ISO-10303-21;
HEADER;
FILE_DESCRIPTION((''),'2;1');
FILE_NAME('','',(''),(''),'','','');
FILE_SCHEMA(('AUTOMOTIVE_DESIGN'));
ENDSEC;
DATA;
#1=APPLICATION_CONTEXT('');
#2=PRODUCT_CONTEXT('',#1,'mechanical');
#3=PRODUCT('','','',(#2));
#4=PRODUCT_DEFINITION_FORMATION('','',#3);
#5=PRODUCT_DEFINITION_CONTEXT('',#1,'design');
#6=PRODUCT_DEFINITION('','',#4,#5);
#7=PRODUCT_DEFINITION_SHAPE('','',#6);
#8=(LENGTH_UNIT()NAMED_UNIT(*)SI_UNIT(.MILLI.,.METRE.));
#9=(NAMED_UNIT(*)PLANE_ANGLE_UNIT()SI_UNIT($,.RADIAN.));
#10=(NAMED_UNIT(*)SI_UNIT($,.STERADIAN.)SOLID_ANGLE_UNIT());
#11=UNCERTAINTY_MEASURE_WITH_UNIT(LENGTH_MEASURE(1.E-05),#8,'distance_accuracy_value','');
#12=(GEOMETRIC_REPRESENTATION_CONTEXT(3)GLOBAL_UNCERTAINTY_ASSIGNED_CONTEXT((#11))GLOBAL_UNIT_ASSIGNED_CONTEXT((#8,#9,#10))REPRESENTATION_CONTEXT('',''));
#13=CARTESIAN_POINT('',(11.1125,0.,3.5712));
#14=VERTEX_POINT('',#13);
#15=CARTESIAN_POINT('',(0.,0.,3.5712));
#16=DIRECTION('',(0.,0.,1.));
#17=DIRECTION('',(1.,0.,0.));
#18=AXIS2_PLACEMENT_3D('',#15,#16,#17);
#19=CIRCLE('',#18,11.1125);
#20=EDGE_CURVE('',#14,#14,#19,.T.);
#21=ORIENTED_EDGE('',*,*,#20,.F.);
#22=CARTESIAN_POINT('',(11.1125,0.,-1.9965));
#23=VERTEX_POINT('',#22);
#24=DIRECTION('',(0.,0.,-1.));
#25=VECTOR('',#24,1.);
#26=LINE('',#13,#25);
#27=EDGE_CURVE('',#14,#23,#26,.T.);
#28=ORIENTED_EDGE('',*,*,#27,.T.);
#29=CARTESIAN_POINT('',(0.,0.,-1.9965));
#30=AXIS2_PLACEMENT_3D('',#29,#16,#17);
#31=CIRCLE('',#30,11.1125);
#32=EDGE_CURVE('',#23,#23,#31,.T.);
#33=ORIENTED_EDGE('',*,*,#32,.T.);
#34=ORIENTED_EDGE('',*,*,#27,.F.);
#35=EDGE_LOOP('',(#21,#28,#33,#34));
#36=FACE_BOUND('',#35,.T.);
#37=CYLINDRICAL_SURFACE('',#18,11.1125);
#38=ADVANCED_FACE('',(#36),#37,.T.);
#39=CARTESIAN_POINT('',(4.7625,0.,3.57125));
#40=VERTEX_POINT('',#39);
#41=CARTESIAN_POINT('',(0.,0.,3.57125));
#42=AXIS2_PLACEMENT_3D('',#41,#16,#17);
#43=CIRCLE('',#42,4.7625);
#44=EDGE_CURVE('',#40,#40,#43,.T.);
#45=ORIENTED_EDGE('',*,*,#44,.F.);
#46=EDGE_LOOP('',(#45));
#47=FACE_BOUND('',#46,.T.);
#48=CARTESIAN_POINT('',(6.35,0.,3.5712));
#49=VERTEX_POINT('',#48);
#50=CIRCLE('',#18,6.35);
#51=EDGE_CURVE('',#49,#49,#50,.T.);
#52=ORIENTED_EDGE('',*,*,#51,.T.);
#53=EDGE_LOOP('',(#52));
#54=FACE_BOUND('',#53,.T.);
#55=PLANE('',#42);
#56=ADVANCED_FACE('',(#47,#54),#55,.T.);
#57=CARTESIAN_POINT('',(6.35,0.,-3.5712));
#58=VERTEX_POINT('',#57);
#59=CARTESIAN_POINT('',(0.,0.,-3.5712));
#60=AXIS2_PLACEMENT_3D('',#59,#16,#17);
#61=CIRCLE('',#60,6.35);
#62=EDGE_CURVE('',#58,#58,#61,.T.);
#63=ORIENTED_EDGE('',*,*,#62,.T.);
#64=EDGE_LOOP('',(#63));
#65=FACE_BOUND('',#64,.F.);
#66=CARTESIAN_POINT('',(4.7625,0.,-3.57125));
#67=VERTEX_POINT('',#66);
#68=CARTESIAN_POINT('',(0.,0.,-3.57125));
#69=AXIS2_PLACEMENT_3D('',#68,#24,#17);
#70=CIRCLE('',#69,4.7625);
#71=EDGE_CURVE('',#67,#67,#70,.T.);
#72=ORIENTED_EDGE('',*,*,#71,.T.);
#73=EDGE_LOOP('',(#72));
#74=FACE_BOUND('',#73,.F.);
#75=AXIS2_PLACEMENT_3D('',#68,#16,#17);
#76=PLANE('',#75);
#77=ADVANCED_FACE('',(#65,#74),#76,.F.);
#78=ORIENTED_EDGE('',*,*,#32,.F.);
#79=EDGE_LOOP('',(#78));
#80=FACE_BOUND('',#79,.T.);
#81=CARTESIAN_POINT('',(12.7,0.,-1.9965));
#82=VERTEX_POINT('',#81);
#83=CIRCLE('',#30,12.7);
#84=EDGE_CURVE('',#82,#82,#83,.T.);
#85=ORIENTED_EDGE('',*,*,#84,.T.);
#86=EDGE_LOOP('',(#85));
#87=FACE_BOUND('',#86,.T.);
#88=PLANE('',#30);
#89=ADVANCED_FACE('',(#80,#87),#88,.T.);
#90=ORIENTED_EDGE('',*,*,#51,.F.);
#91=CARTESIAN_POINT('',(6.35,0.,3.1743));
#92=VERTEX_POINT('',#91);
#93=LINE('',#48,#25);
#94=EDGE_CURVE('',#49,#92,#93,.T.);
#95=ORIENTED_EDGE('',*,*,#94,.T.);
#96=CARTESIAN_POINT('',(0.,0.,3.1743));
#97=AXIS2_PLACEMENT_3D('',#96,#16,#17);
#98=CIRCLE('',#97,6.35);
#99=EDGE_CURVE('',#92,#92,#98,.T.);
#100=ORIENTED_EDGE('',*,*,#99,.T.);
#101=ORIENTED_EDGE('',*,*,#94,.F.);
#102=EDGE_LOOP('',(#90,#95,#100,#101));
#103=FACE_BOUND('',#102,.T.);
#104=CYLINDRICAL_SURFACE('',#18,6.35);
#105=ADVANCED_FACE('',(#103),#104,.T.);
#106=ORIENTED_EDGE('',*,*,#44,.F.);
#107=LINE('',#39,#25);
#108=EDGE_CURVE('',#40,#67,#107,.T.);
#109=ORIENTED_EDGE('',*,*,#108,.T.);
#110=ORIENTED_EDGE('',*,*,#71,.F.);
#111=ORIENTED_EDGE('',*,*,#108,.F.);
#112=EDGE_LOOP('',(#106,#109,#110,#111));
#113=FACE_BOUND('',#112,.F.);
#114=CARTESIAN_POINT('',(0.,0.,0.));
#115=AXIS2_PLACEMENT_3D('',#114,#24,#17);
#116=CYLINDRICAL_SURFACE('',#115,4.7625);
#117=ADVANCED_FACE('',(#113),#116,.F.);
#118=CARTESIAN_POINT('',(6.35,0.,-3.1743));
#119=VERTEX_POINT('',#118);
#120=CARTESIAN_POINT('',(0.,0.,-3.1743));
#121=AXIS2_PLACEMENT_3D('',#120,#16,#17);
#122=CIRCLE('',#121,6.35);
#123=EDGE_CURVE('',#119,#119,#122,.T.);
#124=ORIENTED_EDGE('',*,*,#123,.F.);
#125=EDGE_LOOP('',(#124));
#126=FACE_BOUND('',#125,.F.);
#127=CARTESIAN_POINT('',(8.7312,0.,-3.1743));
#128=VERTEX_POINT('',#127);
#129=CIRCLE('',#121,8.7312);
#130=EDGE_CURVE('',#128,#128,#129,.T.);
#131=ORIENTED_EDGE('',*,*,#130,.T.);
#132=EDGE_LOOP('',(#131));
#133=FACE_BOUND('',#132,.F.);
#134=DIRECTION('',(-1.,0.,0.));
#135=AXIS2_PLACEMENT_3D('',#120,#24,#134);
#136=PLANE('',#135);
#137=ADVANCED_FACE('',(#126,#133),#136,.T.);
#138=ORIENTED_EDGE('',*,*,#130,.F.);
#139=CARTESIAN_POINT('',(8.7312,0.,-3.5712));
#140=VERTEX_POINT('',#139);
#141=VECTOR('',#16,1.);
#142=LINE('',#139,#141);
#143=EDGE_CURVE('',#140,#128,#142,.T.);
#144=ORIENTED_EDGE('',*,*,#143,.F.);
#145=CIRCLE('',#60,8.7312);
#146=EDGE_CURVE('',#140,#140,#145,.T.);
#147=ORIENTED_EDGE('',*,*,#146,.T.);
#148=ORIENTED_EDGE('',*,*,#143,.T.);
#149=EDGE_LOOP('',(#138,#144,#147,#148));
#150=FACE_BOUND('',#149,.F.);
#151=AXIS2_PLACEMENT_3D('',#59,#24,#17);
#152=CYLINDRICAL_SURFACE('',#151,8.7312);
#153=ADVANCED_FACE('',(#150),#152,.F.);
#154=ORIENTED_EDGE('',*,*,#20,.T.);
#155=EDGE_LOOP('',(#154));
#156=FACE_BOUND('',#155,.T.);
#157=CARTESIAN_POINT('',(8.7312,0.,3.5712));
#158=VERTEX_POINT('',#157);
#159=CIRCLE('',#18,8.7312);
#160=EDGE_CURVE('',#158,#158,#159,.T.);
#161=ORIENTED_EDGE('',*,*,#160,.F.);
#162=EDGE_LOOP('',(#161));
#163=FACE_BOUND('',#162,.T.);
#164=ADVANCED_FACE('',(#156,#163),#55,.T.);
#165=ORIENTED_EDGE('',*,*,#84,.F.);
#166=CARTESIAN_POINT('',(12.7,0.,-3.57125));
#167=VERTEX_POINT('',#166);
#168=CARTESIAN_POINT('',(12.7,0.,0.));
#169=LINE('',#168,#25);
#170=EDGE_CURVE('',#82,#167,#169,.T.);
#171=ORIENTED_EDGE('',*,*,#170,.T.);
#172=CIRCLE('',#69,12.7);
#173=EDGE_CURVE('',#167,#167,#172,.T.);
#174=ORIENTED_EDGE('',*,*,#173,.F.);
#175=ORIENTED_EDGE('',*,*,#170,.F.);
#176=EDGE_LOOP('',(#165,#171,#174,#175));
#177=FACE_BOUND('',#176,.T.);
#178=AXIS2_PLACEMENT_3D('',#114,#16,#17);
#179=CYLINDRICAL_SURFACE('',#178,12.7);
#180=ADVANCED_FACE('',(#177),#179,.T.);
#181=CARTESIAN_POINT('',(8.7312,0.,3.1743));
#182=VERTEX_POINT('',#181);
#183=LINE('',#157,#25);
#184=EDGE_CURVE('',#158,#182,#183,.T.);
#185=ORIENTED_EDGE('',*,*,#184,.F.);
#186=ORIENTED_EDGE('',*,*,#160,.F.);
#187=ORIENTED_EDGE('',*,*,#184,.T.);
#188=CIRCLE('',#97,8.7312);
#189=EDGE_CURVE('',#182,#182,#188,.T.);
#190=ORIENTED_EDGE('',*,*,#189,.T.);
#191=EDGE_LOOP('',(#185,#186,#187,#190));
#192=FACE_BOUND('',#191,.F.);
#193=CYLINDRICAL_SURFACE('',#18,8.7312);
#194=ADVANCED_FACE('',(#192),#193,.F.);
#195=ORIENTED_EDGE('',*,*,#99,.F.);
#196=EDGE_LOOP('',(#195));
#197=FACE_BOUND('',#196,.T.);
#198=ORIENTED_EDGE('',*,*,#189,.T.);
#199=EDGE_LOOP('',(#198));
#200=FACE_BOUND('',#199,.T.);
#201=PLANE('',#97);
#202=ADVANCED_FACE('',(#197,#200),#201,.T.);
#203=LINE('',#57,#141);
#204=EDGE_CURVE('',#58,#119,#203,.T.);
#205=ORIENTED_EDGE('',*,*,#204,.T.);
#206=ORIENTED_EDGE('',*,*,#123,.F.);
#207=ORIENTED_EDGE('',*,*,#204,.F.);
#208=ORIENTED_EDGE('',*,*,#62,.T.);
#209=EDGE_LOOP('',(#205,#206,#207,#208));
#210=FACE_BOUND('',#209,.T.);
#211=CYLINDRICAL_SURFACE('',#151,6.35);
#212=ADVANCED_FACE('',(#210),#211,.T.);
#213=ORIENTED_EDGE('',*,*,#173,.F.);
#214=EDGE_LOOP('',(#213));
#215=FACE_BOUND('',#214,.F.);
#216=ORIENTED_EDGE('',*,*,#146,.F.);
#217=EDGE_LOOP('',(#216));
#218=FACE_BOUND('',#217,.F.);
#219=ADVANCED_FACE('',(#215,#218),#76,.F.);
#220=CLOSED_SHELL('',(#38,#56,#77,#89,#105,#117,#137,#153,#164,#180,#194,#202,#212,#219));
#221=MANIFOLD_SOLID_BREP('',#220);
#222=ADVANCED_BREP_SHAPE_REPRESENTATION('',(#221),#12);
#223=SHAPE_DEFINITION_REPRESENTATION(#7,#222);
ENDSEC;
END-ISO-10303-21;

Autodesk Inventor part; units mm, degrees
ref_plane "YZ Plane" through (0, 0, 0) normal (1, 0, 0) x (0, 1, 0)
ref_plane "XZ Plane" through (0, 0, 0) normal (0, 1, 0) x (-1, 0, 0)
ref_plane "XY Plane" through (0, 0, 0) normal (0, 0, 1) x (1, 0, 0)
sketch "Sketch1" plane through (0, 0, 0) normal (0, 0, 1) x (1, 0, 0)
  line L0 (-17.78, 0) -> (17.78, 0) projected
  line L1 (0, -17.78) -> (0, 17.78) projected
  circle A0 centre (0, 0) radius 12.7
  circle A1 centre (0, 0) radius 4.7625
  dimension "d0" = 9.525
  dimension "d1" = 25.4
extrude "Base" add sketch "Sketch1" along normal mid plane 7.1425 contours A1 L1 A0 L0 | L0 A0 L1 A1 | A1 L0 A0 L1 | L1 A0 L0 A1
sketch "Sketch2" plane through (0, 0, 3.5712) normal (0, 0, 1) x (1, 0, 0)
  circle A0 centre (0, 0) radius 12.7 projected
  circle A1 centre (0, 0) radius 11.1125
  dimension "d4" = 22.225
extrude "Flange Cutaway" cut sketch "Sketch2" against normal blind 5.5677
sketch "Sketch3" plane through (0, 0, 3.5712) normal (0, 0, 1) x (1, 0, 0)
  circle A0 centre (0, 0) radius 11.1125 projected
  circle A1 centre (0, 0) radius 4.7625 projected
  circle A2 centre (0, 0) radius 6.35
  circle A3 centre (0, 0) radius 8.7312
  dimension "d7" = 1.5875
  dimension "d8" = 2.3813
extrude "Cutaway" cut sketch "Sketch3" against normal blind 0.3969 contours A3
mirror "Mirror1" about plane through (0, 0, 0) normal (0, 0, 1) of "Cutaway"
properties part number "bearing_1.125OD" material "Steel"
